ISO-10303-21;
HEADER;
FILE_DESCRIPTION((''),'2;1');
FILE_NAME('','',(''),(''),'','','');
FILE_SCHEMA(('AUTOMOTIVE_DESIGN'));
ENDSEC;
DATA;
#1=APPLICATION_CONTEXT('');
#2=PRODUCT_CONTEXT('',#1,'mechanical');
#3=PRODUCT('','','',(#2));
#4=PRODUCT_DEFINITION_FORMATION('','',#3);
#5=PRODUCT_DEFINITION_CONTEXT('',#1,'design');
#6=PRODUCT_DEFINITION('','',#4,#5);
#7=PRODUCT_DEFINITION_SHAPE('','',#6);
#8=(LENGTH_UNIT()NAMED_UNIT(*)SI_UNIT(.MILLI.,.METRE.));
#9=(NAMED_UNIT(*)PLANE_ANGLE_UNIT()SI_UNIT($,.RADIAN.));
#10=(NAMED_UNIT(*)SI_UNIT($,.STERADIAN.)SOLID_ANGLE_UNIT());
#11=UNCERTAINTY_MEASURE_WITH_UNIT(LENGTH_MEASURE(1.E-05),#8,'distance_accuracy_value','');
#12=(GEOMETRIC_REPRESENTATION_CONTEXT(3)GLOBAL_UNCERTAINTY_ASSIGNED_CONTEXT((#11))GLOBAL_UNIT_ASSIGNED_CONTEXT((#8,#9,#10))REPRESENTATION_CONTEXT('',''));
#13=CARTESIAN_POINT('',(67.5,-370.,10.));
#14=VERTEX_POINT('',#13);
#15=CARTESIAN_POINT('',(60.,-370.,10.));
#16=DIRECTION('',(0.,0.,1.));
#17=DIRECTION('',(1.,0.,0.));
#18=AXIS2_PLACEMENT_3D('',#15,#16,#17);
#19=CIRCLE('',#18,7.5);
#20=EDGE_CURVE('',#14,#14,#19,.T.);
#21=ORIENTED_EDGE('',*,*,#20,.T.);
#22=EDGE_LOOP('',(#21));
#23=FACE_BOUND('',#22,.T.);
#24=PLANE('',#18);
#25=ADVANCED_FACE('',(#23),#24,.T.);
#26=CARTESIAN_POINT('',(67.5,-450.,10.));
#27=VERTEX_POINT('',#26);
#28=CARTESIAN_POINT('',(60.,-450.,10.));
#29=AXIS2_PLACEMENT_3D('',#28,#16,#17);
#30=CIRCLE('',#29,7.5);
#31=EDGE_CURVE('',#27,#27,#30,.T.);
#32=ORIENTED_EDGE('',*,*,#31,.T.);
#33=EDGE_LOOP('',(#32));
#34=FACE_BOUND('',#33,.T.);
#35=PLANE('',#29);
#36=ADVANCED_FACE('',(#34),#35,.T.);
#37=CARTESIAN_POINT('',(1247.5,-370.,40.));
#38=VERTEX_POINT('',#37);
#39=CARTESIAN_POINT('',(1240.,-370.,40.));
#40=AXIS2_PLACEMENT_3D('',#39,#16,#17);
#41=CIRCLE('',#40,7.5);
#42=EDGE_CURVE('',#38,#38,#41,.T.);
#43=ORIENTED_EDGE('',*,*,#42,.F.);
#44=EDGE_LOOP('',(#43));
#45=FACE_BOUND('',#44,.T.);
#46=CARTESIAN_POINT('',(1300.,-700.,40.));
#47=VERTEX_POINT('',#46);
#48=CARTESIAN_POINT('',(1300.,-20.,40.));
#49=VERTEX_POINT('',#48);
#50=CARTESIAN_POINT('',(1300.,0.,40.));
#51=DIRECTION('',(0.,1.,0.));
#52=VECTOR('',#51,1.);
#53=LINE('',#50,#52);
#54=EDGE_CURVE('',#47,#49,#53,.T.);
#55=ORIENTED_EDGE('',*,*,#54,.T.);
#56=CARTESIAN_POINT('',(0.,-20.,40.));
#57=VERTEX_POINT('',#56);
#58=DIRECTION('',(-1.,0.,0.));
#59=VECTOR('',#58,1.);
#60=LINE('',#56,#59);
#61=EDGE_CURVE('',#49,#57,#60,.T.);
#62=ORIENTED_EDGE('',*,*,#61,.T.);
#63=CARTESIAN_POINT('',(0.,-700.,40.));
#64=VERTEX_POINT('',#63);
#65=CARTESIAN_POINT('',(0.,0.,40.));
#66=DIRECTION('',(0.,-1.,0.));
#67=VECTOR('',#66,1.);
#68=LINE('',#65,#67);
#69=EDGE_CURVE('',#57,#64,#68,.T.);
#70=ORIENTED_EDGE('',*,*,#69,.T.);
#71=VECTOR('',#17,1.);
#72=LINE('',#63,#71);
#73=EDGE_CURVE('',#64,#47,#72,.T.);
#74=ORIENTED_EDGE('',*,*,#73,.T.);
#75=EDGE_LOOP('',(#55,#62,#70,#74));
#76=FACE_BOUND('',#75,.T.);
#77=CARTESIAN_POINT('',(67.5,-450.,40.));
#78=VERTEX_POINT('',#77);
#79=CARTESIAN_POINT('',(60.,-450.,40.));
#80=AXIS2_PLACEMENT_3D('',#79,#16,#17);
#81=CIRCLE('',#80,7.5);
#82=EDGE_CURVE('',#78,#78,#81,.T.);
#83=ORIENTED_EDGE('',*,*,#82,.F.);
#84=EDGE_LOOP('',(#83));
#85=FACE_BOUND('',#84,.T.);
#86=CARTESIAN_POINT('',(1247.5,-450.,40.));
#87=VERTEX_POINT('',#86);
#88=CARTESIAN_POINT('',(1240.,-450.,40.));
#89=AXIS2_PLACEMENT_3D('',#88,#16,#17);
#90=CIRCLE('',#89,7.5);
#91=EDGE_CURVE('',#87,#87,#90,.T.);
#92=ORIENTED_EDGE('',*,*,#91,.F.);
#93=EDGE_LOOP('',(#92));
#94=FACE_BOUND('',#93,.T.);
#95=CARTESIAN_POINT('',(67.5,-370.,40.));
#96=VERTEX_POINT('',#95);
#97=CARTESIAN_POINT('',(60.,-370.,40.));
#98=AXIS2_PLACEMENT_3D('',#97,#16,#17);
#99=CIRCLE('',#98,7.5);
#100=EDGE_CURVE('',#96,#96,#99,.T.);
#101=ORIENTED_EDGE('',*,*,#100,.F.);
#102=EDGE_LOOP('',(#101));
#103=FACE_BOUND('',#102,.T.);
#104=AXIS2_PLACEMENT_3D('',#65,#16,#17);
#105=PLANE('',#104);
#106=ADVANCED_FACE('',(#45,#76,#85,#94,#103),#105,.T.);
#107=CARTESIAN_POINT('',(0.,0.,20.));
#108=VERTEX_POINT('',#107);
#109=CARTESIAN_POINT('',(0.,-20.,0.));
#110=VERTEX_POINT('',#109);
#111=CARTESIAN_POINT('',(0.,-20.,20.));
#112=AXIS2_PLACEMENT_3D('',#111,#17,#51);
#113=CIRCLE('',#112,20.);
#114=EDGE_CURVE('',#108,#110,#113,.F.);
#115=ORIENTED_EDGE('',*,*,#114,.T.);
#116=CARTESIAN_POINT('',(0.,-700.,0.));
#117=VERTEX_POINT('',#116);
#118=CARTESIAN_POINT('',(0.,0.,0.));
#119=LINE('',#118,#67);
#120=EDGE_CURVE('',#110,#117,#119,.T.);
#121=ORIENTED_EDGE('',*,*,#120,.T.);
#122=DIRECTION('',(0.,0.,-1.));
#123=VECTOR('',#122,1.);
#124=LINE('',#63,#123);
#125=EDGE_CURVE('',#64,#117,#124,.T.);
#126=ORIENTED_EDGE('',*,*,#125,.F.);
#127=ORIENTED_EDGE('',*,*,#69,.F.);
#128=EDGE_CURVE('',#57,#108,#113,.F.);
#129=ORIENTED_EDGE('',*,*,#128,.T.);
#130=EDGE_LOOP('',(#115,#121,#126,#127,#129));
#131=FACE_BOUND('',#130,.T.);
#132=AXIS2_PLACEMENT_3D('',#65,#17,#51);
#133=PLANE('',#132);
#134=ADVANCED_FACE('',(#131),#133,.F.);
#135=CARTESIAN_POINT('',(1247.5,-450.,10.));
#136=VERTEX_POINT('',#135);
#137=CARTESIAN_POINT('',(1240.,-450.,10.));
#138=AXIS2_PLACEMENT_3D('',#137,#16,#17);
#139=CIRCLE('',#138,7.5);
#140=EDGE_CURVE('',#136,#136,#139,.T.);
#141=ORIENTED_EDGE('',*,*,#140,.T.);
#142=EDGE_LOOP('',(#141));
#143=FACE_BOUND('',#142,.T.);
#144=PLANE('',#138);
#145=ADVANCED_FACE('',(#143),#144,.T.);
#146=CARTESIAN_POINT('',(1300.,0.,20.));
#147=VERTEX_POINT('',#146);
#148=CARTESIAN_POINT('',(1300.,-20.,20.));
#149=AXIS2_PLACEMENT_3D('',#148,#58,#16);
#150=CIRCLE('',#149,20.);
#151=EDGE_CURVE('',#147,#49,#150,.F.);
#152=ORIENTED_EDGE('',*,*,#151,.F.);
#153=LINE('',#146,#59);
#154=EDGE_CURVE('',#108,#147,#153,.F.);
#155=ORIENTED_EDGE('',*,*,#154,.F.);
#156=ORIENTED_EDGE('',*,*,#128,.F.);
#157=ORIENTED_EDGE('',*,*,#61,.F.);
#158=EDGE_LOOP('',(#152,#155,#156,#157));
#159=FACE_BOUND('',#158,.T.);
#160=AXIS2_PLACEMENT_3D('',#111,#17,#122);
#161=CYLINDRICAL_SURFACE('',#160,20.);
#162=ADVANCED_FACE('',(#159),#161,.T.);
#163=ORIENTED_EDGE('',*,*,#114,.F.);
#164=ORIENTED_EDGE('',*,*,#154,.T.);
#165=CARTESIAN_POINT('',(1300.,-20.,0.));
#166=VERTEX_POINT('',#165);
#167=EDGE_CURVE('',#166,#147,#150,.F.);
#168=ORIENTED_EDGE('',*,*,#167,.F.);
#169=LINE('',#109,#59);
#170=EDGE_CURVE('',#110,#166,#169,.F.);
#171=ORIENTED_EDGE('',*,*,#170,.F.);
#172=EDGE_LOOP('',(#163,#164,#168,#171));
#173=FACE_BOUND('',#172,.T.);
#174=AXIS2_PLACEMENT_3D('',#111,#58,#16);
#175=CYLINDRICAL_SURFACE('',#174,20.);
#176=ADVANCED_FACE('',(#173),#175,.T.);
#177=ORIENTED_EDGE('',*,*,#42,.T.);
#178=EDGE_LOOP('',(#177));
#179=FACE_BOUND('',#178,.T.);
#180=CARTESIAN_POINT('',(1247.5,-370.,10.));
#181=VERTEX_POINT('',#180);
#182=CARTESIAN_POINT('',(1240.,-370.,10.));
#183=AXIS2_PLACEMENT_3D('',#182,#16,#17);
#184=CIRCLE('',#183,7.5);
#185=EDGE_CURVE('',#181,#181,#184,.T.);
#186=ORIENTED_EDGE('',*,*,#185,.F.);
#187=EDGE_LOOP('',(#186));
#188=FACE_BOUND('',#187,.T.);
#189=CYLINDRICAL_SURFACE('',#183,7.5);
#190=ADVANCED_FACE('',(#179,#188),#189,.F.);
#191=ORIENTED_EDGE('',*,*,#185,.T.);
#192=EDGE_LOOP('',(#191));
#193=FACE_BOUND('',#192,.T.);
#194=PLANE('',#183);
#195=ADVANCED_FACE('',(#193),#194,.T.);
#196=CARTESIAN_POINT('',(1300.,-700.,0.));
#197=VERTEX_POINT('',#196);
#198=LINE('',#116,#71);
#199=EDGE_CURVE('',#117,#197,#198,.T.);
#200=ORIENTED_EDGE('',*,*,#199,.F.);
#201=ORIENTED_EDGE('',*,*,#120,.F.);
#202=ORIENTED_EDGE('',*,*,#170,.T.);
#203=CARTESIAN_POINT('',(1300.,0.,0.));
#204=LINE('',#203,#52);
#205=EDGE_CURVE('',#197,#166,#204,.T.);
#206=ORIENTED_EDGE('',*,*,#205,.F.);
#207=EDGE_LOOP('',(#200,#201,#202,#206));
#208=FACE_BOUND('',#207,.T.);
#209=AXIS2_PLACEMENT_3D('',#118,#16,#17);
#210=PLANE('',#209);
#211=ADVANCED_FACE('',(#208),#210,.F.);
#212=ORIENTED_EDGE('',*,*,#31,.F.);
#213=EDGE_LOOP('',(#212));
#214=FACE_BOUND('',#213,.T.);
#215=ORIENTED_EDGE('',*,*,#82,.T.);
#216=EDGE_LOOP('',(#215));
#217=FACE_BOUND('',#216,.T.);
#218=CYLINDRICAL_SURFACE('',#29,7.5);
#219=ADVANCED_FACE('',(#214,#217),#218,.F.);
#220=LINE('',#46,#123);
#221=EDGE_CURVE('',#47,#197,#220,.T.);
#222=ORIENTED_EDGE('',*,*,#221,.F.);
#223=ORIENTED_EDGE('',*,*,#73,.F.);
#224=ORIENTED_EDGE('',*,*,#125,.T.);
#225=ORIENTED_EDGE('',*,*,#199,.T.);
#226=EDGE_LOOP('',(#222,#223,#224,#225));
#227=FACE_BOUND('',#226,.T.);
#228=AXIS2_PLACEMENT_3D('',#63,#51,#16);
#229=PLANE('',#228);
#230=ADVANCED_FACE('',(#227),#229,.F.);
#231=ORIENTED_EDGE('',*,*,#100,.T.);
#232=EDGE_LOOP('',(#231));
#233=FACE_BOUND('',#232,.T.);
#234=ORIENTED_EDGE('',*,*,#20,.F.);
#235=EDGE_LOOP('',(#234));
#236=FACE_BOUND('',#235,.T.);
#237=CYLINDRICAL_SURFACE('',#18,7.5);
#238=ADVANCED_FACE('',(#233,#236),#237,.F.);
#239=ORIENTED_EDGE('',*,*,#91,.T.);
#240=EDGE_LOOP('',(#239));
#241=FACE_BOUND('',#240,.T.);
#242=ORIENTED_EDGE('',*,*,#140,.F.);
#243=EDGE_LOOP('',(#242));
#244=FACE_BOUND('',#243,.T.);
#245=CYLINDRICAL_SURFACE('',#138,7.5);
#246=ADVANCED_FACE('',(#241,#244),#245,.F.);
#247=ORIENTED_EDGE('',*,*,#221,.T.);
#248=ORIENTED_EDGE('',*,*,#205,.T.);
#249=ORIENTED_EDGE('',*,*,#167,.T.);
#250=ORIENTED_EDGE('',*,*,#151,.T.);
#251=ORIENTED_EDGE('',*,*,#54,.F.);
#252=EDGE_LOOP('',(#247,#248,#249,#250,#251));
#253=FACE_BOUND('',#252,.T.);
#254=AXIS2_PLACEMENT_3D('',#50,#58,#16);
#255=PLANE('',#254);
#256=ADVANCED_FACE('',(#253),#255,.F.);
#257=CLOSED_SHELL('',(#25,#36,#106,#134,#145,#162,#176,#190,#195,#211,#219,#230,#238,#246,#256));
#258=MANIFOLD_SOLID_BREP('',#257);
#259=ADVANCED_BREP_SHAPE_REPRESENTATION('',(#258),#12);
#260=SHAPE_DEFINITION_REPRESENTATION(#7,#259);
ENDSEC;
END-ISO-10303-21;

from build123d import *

# Parameters (mm, degrees)
SCHIZZO1_W                   = 1300
SCHIZZO1_H                   = 700
ESTRUSIONE_ESTRUSIONE1_DEPTH = 40
RACCORDO1_R                  = 20
SCHIZZO2_R                   = 7.5
TAGLIO_ESTRUSIONE1_DEPTH     = 30


with BuildPart() as part:
    # Schizzo1 → Estrusione-Estrusione1 (new body)
    with BuildSketch(Plane.XY):
        with Locations((650, -350)):
            Rectangle(SCHIZZO1_W, SCHIZZO1_H)
    extrude(amount=ESTRUSIONE_ESTRUSIONE1_DEPTH)

    # Raccordo1
    raccordo1_edges = [part.edges().sort_by_distance(p)[0] for p in [
        (650, 0, 0),
        (650, 0, 40),
    ]]
    fillet(raccordo1_edges, radius=RACCORDO1_R - 0.0001)  # a hair under: the kernel refuses the full size

    # Schizzo2 → Taglio-Estrusione1 (cut)
    with BuildSketch(Plane.XY.offset(40)):
        with Locations((60, -370)):
            Circle(SCHIZZO2_R)
        with Locations((60, -450)):
            Circle(SCHIZZO2_R)
        with Locations((1240, -370)):
            Circle(SCHIZZO2_R)
        with Locations((1240, -450)):
            Circle(SCHIZZO2_R)
    extrude(amount=-TAGLIO_ESTRUSIONE1_DEPTH, mode=Mode.SUBTRACT)


solid = part.part
